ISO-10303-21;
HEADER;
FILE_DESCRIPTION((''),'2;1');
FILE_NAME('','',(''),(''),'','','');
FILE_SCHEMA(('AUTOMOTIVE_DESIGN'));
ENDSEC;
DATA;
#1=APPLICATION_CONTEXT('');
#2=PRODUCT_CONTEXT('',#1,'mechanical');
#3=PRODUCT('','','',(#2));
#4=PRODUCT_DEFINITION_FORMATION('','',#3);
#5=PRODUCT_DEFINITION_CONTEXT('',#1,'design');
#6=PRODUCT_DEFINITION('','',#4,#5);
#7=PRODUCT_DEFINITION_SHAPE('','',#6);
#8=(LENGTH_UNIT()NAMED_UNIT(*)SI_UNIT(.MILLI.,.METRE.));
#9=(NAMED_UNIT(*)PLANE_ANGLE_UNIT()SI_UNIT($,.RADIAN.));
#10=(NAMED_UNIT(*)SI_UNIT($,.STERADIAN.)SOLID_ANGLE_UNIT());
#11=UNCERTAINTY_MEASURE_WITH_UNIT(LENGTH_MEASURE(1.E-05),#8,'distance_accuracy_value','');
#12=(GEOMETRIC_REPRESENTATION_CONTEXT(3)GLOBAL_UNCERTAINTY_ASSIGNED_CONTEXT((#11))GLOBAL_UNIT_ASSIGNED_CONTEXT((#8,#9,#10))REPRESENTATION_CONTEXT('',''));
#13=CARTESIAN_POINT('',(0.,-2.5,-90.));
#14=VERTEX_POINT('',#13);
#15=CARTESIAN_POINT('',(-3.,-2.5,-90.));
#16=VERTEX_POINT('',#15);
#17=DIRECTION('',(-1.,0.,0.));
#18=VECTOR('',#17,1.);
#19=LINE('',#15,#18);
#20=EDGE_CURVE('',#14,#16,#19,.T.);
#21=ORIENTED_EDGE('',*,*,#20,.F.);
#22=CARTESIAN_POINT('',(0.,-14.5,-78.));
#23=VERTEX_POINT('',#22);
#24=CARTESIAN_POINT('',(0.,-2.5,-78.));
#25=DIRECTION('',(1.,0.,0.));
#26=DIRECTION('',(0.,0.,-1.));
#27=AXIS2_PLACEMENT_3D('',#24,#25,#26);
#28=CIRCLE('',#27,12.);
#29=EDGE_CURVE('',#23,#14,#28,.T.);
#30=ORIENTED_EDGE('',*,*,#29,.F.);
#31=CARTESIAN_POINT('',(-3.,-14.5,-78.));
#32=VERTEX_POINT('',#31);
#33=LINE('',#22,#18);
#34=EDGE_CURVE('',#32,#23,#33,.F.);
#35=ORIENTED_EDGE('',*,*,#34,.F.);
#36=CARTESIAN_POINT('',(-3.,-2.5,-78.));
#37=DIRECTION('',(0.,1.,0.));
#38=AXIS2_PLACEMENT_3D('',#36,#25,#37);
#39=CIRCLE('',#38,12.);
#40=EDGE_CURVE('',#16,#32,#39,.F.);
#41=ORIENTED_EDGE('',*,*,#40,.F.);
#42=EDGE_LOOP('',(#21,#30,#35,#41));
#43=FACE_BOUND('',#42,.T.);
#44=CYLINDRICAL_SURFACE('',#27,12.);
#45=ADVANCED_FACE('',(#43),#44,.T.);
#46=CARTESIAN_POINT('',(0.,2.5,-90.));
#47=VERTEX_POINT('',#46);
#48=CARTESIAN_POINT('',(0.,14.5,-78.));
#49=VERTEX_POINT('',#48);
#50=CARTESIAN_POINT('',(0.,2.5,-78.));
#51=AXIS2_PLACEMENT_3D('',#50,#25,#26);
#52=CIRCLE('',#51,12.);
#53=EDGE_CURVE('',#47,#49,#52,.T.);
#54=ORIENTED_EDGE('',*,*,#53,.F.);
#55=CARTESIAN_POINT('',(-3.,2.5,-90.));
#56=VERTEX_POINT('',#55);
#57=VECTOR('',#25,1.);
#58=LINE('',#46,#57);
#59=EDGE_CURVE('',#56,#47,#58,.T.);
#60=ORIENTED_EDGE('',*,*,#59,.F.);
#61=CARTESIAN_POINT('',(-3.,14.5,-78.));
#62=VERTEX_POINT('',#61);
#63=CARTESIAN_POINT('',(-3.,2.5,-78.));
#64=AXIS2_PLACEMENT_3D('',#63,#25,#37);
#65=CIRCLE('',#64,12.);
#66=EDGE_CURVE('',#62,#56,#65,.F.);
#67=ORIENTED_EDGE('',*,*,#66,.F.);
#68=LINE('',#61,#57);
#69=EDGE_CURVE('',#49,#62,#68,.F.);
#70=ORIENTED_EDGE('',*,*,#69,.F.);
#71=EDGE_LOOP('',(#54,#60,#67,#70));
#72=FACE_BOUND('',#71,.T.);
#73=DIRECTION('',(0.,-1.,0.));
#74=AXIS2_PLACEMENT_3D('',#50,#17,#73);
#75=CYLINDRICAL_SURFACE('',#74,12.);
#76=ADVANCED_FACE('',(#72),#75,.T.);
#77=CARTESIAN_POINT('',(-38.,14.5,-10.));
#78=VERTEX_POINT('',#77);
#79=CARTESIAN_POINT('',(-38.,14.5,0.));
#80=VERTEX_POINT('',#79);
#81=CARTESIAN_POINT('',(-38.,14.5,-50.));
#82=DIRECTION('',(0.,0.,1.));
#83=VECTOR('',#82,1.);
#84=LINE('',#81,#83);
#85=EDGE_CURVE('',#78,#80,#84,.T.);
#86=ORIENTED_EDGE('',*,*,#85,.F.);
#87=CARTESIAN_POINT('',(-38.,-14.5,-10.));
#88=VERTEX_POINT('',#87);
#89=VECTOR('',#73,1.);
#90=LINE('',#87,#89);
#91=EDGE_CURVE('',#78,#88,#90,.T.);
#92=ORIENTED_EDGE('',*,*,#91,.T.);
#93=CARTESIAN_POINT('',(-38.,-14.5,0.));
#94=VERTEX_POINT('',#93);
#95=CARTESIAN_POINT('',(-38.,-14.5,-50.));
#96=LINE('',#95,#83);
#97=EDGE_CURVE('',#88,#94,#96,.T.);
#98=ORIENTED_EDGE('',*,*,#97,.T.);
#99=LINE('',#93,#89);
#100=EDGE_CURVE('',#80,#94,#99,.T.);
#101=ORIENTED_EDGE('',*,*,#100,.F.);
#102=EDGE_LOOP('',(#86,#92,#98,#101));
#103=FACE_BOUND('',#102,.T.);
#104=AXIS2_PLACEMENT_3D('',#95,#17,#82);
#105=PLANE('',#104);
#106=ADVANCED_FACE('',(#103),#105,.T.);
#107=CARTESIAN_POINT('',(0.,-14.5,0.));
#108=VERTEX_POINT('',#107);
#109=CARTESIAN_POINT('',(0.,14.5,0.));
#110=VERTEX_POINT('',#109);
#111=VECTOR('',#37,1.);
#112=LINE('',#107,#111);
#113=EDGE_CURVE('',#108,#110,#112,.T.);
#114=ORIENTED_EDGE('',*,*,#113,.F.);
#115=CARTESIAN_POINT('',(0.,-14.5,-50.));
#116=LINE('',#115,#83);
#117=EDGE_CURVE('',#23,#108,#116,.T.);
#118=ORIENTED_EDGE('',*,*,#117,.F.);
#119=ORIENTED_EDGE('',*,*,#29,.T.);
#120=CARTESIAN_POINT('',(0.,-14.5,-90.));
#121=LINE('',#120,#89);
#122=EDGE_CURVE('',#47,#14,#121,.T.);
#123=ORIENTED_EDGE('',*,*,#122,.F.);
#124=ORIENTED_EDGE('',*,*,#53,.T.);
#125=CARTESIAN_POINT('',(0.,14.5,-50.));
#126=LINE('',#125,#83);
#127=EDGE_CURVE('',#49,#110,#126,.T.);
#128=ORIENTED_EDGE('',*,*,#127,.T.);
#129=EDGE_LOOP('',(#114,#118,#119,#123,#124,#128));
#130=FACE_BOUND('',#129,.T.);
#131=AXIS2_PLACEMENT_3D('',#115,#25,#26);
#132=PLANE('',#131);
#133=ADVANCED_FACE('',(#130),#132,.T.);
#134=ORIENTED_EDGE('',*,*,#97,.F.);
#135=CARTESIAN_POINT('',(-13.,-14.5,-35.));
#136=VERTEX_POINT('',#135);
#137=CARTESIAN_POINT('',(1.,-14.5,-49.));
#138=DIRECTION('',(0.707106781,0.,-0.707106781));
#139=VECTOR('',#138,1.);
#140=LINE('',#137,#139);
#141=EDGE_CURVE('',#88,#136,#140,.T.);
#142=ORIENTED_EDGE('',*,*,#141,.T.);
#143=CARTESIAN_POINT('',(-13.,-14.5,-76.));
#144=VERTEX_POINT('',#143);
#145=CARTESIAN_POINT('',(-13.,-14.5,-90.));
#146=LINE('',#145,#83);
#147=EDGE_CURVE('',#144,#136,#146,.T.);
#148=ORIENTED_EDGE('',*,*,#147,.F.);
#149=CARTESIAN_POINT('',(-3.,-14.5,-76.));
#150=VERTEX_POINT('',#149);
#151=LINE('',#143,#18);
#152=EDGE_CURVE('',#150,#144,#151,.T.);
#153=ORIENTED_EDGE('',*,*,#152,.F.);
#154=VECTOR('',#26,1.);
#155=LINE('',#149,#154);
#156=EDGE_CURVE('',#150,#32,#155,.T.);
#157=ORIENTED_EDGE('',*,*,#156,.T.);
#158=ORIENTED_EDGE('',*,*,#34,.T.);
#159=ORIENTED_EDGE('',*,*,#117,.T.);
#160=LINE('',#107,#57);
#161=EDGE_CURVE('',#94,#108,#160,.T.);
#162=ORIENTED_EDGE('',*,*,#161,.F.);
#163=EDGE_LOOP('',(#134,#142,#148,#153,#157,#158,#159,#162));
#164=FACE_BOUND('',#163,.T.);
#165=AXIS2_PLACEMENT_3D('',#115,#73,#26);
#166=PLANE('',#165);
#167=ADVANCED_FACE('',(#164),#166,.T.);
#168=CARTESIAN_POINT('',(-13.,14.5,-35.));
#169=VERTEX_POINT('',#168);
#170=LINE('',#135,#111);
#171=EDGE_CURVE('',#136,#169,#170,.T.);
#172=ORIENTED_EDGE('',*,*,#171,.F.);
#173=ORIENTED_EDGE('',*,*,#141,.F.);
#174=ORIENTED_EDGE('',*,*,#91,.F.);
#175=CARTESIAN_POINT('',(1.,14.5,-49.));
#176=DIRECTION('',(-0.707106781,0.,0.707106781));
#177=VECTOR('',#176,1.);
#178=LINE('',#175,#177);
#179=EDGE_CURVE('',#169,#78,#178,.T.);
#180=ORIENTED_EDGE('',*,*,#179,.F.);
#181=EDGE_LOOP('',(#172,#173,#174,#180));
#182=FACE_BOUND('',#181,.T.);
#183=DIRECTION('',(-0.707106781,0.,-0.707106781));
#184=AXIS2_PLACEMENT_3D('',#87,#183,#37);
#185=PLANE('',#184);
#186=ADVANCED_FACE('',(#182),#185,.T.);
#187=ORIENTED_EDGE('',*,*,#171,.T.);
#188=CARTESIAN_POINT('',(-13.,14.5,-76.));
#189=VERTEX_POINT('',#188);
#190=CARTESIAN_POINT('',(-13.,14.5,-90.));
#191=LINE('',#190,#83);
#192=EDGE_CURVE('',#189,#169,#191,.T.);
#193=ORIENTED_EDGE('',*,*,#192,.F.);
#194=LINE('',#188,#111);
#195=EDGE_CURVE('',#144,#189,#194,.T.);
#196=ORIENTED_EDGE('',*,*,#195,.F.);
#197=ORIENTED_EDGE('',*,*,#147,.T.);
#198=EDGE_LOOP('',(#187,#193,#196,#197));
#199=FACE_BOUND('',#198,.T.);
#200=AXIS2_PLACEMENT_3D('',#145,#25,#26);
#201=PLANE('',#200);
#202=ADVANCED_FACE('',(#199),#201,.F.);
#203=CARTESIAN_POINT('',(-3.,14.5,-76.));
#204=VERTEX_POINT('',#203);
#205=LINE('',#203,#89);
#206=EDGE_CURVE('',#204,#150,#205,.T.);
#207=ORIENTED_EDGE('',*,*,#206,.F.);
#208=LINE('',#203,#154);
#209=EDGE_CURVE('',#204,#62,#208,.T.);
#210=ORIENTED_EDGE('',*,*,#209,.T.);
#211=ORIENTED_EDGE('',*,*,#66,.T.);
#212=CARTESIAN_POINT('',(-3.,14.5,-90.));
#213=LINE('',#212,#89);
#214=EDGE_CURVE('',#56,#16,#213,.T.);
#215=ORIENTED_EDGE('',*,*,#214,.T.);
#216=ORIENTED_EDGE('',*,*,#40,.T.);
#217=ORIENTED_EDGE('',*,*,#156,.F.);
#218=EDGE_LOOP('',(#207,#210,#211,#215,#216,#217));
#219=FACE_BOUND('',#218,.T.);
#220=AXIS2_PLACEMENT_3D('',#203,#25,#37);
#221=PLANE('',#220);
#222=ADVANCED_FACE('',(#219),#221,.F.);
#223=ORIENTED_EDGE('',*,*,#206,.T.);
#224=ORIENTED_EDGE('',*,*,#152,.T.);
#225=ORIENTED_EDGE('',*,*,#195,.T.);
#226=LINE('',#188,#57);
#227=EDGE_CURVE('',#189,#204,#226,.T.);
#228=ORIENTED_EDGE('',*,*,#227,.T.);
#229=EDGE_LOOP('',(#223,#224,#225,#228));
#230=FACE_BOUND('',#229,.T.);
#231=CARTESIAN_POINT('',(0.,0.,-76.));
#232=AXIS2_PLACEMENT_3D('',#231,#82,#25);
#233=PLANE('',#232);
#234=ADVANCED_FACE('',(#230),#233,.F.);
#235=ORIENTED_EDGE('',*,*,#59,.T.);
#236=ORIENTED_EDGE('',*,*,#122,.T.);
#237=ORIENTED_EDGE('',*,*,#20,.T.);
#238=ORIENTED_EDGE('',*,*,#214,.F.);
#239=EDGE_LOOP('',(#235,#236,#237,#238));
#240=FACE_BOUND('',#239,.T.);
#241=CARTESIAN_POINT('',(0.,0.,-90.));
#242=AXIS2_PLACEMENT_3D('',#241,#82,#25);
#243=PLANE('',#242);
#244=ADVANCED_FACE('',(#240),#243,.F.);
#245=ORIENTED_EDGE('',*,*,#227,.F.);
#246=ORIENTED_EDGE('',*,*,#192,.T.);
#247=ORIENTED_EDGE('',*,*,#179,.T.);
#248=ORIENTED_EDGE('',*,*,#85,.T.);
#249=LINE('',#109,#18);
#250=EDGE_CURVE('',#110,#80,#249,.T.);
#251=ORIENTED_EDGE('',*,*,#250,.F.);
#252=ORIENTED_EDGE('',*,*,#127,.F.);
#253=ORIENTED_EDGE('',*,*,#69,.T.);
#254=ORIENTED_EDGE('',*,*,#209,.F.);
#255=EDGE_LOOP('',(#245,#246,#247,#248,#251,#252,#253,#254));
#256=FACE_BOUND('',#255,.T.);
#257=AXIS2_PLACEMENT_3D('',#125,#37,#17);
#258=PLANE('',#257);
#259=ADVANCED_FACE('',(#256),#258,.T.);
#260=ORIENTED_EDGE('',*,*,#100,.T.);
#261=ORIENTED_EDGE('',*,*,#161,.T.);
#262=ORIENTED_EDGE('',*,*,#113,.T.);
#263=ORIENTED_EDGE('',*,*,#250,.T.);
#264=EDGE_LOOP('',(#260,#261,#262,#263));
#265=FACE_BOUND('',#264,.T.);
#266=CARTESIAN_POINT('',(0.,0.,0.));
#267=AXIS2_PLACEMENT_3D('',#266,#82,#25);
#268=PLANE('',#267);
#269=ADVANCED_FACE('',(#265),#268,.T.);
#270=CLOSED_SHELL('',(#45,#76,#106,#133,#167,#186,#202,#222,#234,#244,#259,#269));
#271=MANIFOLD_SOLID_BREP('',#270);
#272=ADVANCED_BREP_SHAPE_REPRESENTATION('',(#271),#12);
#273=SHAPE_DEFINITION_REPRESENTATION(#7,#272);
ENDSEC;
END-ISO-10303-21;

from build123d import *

# Parameters (mm, degrees)
SKETCH1_W           = 38
SKETCH1_H           = 29
BOSS_EXTRUDE1_DEPTH = 50
SKETCH2_W           = 13
SKETCH2_H           = 29
BOSS_EXTRUDE2_DEPTH = 40
CHAMFER1_SIZE       = 40
SKETCH3_W           = 10
SKETCH3_H           = 29
CUT_EXTRUDE1_DEPTH  = 14
FILLET1_R           = 12


with BuildPart() as part:
    # Sketch1 → Boss-Extrude1 (new body)
    with BuildSketch(Plane.XY):
        with Locations((-19, 0)):
            Rectangle(SKETCH1_W, SKETCH1_H)
    extrude(amount=-BOSS_EXTRUDE1_DEPTH)

    # Sketch2 → Boss-Extrude2 (add)
    with BuildSketch(Plane(origin=(0, 0, -50), x_dir=(-1, 0, 0), z_dir=(0, 0, -1))):
        with Locations((6.5, 0)):
            Rectangle(SKETCH2_W, SKETCH2_H)
    extrude(amount=BOSS_EXTRUDE2_DEPTH)

    # Chamfer1
    # the kernel refuses this chamfer: 40 mm, written as the material it takes off along each edge
    with BuildSketch(Plane(origin=(-38, -117.367319519, -50), x_dir=(-0.027495876610586317, 0, 0.9996219169112968), z_dir=(0, 1, 0))) as chamfer1_piece_1_section:
        Polygon((CHAMFER1_SIZE * 0.999621916911, CHAMFER1_SIZE * 0.0274958766106), (-CHAMFER1_SIZE * 0.0274958766106, CHAMFER1_SIZE * 0.999621916911), (0, 0), align=None)
    chamfer1_piece_1 = extrude(amount=234.734639037, mode=Mode.PRIVATE)
    chamfer1_piece_1 = split(chamfer1_piece_1, bisect_by=Plane(origin=(-13, 0, -35.169417803), z_dir=(-1, 0, 0)), keep=Keep.TOP, mode=Mode.PRIVATE)
    add(chamfer1_piece_1, mode=Mode.SUBTRACT)

    # Sketch3 → Cut-Extrude1 (cut)
    with BuildSketch(Plane(origin=(0, 0, -90), x_dir=(-1, 0, 0), z_dir=(0, 0, -1))):
        with Locations((8, 0)):
            Rectangle(SKETCH3_W, SKETCH3_H)
    extrude(amount=-CUT_EXTRUDE1_DEPTH, mode=Mode.SUBTRACT)

    # Fillet1
    fillet1_edges = [part.edges().sort_by_distance(p)[0] for p in [
        (-1.5, -14.5, -90),
        (-1.5, 14.5, -90),
    ]]
    fillet(fillet1_edges, radius=FILLET1_R)


solid = part.part
